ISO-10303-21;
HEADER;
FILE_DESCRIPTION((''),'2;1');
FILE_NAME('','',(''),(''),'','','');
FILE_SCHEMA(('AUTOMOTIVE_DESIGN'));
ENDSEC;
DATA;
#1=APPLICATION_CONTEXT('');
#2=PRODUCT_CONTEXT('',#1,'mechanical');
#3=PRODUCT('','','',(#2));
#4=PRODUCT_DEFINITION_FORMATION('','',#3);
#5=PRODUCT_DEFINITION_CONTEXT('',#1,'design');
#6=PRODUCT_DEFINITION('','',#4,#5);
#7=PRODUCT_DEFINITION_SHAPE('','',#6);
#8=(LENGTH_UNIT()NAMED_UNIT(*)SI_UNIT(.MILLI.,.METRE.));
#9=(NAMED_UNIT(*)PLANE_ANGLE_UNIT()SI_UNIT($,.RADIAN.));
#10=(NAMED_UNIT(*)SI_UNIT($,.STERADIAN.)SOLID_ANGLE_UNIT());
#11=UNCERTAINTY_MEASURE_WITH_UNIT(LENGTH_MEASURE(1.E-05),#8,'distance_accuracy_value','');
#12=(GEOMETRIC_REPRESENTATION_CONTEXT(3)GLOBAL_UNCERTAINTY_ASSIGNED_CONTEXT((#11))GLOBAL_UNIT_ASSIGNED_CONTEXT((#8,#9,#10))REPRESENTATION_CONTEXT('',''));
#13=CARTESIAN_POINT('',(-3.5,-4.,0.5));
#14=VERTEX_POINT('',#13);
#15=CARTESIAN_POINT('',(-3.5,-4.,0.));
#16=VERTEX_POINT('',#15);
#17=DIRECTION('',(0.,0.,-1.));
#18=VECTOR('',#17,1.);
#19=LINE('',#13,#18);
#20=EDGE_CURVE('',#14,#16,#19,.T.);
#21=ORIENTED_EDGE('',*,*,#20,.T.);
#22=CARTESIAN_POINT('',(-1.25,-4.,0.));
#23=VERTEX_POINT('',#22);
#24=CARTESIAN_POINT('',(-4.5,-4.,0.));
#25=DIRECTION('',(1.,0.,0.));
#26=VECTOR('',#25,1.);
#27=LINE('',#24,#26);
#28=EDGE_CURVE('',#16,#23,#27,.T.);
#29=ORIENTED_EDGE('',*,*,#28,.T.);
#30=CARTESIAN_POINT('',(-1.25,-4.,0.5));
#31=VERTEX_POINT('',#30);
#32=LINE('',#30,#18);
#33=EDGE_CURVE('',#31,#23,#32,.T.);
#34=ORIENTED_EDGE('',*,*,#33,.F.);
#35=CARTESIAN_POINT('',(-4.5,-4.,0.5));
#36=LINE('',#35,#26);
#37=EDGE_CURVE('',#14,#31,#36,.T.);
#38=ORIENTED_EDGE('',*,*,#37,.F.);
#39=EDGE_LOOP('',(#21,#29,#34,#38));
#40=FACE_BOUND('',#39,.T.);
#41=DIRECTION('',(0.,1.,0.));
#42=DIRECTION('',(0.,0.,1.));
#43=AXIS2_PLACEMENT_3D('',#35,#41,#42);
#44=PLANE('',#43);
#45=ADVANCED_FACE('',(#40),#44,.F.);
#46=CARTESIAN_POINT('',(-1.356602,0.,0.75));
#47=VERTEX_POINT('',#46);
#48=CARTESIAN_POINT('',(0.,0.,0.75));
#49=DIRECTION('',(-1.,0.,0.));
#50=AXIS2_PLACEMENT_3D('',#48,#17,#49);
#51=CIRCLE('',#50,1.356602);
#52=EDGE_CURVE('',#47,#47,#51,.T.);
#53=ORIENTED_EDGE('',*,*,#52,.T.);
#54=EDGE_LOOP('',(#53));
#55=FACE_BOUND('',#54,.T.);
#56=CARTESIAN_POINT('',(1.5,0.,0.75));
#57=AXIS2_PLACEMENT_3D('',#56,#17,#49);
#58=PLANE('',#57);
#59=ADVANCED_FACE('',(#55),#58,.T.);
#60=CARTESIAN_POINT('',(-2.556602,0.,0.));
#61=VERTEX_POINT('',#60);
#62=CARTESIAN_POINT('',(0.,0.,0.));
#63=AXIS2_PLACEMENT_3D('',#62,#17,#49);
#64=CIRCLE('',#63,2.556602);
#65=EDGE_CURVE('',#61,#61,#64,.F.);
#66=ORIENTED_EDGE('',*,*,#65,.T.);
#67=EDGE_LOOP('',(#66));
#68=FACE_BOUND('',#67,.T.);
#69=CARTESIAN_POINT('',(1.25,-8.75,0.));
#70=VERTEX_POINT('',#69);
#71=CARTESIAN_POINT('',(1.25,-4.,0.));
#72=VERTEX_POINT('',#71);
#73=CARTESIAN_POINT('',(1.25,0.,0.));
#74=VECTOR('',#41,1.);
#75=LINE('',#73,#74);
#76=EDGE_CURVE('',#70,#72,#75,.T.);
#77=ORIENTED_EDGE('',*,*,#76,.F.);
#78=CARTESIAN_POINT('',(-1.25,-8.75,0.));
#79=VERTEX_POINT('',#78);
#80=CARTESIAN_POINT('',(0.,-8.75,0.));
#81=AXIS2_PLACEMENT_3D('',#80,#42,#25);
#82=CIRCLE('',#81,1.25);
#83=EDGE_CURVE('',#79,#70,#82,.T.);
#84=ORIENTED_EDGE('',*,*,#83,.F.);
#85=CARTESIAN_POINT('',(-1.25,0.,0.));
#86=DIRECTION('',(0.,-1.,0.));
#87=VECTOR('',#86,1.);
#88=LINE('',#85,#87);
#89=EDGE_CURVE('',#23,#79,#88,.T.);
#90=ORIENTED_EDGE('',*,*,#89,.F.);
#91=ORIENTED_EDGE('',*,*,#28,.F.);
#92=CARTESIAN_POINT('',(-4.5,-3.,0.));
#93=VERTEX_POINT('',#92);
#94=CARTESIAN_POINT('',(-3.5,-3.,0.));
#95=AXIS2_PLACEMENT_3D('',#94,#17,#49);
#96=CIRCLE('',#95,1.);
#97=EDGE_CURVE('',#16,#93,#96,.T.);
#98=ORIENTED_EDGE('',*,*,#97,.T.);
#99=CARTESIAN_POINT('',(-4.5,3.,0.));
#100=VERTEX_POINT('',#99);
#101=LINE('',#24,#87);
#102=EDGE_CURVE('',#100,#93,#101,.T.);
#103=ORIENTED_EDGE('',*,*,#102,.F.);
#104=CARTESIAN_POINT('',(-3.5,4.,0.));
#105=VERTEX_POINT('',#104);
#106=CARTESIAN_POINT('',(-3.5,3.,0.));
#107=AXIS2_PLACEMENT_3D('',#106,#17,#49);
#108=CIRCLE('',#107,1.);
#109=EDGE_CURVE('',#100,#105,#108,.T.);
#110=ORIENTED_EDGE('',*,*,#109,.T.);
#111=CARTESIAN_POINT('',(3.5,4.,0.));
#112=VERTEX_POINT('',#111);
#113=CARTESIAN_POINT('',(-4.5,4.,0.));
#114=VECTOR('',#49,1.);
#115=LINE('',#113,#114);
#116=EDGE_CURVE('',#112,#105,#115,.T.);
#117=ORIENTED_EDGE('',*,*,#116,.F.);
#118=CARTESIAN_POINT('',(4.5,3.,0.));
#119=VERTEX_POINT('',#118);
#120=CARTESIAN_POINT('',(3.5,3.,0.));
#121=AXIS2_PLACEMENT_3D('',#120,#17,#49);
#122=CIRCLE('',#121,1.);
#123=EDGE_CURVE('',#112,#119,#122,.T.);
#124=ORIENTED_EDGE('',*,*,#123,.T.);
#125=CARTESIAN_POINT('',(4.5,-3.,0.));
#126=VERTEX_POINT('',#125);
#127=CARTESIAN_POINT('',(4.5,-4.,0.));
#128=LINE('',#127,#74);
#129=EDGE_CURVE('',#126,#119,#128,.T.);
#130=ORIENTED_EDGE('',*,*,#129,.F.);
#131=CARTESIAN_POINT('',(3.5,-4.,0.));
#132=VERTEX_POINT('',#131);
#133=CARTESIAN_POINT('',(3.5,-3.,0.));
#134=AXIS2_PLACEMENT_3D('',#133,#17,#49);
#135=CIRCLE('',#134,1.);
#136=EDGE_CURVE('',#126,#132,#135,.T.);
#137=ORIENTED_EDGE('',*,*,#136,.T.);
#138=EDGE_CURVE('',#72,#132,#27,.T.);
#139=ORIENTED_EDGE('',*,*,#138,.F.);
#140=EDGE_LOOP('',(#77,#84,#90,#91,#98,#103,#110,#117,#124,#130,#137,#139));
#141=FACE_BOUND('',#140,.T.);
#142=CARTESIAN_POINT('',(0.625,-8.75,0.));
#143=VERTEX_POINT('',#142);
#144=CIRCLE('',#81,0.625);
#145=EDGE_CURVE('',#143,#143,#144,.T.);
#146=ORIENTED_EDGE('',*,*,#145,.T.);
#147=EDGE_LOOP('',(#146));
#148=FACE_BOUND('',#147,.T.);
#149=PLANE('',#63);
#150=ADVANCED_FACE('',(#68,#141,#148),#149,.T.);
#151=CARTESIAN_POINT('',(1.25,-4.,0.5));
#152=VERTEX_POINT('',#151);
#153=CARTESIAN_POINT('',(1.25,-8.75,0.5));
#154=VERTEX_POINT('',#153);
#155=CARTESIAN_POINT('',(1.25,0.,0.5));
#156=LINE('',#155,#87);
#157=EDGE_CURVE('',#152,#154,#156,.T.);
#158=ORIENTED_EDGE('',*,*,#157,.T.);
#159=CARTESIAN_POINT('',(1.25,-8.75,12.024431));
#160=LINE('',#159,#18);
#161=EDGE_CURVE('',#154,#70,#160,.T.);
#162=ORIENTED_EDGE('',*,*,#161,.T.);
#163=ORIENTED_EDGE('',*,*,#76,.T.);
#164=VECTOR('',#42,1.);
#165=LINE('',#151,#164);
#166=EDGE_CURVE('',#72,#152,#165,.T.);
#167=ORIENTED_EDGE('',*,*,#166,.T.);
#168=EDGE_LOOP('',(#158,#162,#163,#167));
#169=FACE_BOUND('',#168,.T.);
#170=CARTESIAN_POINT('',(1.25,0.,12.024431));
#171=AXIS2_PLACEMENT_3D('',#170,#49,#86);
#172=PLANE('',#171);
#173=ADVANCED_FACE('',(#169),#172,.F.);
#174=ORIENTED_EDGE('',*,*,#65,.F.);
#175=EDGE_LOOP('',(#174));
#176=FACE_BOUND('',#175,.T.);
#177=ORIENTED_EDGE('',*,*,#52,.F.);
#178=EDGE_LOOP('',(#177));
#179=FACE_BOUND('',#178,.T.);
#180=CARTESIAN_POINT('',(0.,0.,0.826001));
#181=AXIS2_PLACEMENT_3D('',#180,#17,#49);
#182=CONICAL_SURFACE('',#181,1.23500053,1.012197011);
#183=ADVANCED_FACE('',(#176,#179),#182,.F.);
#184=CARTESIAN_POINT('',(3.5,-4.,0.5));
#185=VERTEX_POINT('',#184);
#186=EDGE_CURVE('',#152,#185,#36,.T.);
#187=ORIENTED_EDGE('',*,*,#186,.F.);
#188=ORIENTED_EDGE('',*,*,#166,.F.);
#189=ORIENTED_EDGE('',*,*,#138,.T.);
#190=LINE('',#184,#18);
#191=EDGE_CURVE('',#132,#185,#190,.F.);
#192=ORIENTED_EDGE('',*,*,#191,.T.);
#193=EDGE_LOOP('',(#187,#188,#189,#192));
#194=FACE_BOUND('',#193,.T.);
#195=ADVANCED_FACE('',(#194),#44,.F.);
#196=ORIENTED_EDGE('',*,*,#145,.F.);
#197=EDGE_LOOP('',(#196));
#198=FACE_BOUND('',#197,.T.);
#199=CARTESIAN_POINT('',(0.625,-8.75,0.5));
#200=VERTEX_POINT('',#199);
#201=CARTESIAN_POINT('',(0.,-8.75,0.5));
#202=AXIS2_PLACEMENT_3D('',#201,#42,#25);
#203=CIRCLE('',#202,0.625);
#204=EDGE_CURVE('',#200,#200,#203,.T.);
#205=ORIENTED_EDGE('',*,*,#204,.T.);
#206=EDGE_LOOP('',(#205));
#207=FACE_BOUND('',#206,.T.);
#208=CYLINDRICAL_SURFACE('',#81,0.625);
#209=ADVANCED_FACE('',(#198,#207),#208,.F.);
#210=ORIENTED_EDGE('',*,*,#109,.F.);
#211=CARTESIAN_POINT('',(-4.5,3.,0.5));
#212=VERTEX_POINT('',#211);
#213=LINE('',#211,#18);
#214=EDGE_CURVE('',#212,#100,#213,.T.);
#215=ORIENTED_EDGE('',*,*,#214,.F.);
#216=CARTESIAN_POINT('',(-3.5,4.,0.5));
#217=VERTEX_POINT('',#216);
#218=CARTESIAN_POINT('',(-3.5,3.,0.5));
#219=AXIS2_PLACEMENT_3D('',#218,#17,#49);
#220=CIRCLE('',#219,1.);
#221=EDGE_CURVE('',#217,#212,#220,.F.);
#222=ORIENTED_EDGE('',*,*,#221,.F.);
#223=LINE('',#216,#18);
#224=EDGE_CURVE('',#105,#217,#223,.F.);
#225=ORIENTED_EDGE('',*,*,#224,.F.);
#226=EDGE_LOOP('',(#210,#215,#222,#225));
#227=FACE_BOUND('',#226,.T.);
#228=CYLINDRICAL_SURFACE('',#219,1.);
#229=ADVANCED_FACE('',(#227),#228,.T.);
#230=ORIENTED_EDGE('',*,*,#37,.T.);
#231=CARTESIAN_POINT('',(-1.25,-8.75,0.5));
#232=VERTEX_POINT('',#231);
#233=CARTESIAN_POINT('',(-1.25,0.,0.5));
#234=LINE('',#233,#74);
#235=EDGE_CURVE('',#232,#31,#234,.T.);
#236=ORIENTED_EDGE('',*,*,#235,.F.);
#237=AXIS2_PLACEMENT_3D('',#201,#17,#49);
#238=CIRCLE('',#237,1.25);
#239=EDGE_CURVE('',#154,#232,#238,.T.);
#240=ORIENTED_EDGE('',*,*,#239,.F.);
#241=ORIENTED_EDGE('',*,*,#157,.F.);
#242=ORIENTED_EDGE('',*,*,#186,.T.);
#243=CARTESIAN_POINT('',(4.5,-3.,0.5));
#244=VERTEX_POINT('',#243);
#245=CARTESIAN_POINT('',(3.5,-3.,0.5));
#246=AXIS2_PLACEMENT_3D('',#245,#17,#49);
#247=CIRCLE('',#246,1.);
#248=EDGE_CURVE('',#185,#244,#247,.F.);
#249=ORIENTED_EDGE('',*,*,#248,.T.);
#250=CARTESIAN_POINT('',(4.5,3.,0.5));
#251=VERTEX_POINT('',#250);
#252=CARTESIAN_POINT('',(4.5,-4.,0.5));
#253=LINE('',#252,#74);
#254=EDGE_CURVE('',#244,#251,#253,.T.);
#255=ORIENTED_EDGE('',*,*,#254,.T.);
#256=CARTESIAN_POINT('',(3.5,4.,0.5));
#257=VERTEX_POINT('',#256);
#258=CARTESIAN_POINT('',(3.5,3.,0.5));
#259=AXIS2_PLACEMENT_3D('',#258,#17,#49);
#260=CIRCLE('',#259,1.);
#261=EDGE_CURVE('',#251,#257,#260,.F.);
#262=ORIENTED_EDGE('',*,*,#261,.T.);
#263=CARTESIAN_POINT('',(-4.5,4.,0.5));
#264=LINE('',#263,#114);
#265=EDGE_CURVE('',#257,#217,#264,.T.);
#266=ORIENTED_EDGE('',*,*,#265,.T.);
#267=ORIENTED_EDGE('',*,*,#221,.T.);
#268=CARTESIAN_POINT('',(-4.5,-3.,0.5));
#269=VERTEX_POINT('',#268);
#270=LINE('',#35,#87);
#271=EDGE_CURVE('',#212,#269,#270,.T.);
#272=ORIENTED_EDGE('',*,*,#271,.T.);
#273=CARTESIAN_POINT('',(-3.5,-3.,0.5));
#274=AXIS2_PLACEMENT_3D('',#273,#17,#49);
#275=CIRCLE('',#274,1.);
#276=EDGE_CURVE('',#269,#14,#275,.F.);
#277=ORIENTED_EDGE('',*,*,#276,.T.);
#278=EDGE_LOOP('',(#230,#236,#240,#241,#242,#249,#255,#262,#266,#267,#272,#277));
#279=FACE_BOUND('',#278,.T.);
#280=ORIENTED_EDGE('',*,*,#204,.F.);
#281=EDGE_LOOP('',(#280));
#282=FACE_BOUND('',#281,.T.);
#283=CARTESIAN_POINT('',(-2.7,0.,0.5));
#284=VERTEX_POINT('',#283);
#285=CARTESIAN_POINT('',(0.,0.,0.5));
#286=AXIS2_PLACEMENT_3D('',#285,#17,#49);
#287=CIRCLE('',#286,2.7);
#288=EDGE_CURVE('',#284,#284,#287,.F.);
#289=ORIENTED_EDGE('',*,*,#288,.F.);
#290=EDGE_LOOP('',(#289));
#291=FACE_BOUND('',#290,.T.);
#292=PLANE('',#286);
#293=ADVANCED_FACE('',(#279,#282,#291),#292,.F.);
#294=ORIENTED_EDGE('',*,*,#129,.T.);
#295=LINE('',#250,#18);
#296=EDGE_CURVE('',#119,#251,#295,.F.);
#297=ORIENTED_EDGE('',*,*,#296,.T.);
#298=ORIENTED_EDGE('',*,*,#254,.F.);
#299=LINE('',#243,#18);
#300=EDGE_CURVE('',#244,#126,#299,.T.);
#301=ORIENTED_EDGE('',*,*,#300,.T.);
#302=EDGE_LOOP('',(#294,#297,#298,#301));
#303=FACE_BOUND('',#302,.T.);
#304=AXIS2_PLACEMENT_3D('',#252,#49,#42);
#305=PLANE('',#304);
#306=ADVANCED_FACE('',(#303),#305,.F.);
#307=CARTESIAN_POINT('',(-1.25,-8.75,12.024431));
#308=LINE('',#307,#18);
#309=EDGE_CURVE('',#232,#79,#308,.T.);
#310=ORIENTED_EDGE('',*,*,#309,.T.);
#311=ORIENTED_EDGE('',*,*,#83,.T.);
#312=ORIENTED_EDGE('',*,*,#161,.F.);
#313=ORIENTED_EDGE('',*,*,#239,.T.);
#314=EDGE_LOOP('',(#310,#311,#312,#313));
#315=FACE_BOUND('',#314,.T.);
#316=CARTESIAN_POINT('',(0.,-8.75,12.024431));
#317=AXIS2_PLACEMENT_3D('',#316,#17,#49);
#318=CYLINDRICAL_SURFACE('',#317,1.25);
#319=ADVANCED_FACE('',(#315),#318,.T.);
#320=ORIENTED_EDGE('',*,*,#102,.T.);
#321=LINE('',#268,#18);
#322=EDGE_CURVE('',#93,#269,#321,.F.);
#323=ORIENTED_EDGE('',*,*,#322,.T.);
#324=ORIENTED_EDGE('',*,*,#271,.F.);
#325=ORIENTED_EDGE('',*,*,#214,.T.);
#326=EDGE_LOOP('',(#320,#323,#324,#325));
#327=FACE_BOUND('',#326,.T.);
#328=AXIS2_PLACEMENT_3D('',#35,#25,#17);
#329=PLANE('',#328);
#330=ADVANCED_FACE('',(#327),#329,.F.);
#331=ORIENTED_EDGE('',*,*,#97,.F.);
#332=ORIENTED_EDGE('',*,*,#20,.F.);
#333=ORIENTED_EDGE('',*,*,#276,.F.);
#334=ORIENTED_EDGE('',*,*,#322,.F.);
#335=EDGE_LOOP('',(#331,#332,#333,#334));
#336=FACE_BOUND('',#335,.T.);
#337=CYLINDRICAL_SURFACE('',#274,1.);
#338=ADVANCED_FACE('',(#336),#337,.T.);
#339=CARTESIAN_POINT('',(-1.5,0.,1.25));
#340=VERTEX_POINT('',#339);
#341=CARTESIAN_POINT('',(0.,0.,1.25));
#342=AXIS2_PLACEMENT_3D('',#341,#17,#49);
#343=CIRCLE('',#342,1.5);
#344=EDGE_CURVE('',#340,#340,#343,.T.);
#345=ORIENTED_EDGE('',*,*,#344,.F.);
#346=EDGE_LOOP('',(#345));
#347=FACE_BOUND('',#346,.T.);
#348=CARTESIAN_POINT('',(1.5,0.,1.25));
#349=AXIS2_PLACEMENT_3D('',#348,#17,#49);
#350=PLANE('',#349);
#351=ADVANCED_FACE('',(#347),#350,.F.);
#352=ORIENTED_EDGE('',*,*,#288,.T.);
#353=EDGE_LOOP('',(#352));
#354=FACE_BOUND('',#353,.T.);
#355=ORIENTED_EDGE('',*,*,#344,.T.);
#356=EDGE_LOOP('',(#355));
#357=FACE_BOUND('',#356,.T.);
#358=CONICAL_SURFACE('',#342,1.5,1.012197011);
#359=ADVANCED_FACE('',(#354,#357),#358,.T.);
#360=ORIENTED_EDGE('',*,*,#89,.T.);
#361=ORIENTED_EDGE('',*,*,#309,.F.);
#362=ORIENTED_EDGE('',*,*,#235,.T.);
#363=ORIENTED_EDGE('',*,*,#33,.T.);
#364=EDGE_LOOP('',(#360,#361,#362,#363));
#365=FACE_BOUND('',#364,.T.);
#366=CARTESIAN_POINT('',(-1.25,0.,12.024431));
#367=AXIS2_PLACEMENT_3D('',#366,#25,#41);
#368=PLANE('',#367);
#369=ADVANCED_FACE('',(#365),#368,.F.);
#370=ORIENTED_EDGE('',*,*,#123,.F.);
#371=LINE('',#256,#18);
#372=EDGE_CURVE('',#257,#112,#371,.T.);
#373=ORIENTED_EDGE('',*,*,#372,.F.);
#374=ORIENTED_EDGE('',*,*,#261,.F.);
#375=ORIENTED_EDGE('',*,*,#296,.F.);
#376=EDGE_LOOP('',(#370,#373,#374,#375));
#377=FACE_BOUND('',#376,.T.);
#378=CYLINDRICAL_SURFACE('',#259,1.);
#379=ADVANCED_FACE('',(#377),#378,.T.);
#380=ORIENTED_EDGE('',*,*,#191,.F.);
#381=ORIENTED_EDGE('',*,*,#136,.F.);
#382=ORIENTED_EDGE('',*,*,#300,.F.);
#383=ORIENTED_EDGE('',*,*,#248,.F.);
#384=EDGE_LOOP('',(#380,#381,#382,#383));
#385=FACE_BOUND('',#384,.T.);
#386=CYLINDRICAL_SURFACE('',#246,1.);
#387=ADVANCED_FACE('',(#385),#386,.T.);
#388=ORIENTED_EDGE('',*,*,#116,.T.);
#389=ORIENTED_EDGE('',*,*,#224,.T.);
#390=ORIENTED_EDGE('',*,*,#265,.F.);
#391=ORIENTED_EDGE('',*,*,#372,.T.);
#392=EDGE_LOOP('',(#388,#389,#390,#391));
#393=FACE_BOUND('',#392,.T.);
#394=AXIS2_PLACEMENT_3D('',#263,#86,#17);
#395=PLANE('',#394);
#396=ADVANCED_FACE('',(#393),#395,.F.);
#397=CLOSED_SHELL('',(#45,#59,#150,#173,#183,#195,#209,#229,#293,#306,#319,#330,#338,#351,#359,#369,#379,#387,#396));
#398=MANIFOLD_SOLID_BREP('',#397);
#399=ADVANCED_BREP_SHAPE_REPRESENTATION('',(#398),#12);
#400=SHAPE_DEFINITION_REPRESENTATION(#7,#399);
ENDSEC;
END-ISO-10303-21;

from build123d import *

# Parameters (mm, degrees)
SKETCH1_W           = 9
SKETCH1_H           = 8
BOSS_EXTRUDE1_DEPTH = 0.5
BOSS_EXTRUDE2_DEPTH = 0.5
FILLET1_R           = 1
SKETCH4_R           = 0.625
CUT_EXTRUDE1_DEPTH  = 11.9772492


# Read off the part's stored shape, not the designer's step: Shell1
with BuildPart() as part:
    # Sketch1 → Boss-Extrude1 (new body)
    with BuildSketch(Plane.XY):
        Rectangle(SKETCH1_W, SKETCH1_H)
    extrude(amount=BOSS_EXTRUDE1_DEPTH)

    # Sketch2 → Boss-Extrude2 (add)
    with BuildSketch(Plane.XY):
        with BuildLine():
            Line((1.25, 0), (1.25, -8.75))
            ThreePointArc((1.25, -8.75), (0, -10), (-1.25, -8.75))
            Line((-1.25, -8.75), (-1.25, 0))
            ThreePointArc((-1.25, 0), (0, 1.25), (1.25, 0))
        make_face()
    extrude(amount=BOSS_EXTRUDE2_DEPTH)

    # Fillet1
    fillet1_edges = [part.edges().sort_by_distance(p)[0] for p in [
        (4.5, -4, 0.25),
        (-4.5, -4, 0.25),
        (-4.5, 4, 0.25),
        (4.5, 4, 0.25),
    ]]
    fillet(fillet1_edges, radius=FILLET1_R)

    # Sketch4 → Cut-Extrude1 (cut, through all)
    with BuildSketch(Plane.XY.offset(0.5)):
        with Locations((0, -8.75)):
            Circle(SKETCH4_R)
    extrude(amount=-CUT_EXTRUDE1_DEPTH, mode=Mode.SUBTRACT)

    # Sketch5 → Revolve1 (revolve)
    with BuildSketch(Plane(origin=(0, 0, 0), x_dir=(1, 0, 0), z_dir=(0, 1, 0)), mode=Mode.PRIVATE) as revolve1_sk:
        Polygon((0, -0.5), (2.7, -0.5), (1.5, -1.25), (0, -1.25), align=None)
    revolve(revolve1_sk.sketch.rotate(Axis((0, 0, -88.99), (0, 0, 1)), 180), axis=Axis((0, 0, -88.99), (0, 0, 1)))

    # Shell1 outline → Shell1 (revolve, cut)
    with BuildSketch(Plane.XZ):
        Polygon((2.556601887, 0), (1.356601887, 0.75), (0, 0.75), (0, 0), align=None)
    revolve(axis=Axis((0, 0, 0), (0, 0, 1)), mode=Mode.SUBTRACT)


solid = part.part
